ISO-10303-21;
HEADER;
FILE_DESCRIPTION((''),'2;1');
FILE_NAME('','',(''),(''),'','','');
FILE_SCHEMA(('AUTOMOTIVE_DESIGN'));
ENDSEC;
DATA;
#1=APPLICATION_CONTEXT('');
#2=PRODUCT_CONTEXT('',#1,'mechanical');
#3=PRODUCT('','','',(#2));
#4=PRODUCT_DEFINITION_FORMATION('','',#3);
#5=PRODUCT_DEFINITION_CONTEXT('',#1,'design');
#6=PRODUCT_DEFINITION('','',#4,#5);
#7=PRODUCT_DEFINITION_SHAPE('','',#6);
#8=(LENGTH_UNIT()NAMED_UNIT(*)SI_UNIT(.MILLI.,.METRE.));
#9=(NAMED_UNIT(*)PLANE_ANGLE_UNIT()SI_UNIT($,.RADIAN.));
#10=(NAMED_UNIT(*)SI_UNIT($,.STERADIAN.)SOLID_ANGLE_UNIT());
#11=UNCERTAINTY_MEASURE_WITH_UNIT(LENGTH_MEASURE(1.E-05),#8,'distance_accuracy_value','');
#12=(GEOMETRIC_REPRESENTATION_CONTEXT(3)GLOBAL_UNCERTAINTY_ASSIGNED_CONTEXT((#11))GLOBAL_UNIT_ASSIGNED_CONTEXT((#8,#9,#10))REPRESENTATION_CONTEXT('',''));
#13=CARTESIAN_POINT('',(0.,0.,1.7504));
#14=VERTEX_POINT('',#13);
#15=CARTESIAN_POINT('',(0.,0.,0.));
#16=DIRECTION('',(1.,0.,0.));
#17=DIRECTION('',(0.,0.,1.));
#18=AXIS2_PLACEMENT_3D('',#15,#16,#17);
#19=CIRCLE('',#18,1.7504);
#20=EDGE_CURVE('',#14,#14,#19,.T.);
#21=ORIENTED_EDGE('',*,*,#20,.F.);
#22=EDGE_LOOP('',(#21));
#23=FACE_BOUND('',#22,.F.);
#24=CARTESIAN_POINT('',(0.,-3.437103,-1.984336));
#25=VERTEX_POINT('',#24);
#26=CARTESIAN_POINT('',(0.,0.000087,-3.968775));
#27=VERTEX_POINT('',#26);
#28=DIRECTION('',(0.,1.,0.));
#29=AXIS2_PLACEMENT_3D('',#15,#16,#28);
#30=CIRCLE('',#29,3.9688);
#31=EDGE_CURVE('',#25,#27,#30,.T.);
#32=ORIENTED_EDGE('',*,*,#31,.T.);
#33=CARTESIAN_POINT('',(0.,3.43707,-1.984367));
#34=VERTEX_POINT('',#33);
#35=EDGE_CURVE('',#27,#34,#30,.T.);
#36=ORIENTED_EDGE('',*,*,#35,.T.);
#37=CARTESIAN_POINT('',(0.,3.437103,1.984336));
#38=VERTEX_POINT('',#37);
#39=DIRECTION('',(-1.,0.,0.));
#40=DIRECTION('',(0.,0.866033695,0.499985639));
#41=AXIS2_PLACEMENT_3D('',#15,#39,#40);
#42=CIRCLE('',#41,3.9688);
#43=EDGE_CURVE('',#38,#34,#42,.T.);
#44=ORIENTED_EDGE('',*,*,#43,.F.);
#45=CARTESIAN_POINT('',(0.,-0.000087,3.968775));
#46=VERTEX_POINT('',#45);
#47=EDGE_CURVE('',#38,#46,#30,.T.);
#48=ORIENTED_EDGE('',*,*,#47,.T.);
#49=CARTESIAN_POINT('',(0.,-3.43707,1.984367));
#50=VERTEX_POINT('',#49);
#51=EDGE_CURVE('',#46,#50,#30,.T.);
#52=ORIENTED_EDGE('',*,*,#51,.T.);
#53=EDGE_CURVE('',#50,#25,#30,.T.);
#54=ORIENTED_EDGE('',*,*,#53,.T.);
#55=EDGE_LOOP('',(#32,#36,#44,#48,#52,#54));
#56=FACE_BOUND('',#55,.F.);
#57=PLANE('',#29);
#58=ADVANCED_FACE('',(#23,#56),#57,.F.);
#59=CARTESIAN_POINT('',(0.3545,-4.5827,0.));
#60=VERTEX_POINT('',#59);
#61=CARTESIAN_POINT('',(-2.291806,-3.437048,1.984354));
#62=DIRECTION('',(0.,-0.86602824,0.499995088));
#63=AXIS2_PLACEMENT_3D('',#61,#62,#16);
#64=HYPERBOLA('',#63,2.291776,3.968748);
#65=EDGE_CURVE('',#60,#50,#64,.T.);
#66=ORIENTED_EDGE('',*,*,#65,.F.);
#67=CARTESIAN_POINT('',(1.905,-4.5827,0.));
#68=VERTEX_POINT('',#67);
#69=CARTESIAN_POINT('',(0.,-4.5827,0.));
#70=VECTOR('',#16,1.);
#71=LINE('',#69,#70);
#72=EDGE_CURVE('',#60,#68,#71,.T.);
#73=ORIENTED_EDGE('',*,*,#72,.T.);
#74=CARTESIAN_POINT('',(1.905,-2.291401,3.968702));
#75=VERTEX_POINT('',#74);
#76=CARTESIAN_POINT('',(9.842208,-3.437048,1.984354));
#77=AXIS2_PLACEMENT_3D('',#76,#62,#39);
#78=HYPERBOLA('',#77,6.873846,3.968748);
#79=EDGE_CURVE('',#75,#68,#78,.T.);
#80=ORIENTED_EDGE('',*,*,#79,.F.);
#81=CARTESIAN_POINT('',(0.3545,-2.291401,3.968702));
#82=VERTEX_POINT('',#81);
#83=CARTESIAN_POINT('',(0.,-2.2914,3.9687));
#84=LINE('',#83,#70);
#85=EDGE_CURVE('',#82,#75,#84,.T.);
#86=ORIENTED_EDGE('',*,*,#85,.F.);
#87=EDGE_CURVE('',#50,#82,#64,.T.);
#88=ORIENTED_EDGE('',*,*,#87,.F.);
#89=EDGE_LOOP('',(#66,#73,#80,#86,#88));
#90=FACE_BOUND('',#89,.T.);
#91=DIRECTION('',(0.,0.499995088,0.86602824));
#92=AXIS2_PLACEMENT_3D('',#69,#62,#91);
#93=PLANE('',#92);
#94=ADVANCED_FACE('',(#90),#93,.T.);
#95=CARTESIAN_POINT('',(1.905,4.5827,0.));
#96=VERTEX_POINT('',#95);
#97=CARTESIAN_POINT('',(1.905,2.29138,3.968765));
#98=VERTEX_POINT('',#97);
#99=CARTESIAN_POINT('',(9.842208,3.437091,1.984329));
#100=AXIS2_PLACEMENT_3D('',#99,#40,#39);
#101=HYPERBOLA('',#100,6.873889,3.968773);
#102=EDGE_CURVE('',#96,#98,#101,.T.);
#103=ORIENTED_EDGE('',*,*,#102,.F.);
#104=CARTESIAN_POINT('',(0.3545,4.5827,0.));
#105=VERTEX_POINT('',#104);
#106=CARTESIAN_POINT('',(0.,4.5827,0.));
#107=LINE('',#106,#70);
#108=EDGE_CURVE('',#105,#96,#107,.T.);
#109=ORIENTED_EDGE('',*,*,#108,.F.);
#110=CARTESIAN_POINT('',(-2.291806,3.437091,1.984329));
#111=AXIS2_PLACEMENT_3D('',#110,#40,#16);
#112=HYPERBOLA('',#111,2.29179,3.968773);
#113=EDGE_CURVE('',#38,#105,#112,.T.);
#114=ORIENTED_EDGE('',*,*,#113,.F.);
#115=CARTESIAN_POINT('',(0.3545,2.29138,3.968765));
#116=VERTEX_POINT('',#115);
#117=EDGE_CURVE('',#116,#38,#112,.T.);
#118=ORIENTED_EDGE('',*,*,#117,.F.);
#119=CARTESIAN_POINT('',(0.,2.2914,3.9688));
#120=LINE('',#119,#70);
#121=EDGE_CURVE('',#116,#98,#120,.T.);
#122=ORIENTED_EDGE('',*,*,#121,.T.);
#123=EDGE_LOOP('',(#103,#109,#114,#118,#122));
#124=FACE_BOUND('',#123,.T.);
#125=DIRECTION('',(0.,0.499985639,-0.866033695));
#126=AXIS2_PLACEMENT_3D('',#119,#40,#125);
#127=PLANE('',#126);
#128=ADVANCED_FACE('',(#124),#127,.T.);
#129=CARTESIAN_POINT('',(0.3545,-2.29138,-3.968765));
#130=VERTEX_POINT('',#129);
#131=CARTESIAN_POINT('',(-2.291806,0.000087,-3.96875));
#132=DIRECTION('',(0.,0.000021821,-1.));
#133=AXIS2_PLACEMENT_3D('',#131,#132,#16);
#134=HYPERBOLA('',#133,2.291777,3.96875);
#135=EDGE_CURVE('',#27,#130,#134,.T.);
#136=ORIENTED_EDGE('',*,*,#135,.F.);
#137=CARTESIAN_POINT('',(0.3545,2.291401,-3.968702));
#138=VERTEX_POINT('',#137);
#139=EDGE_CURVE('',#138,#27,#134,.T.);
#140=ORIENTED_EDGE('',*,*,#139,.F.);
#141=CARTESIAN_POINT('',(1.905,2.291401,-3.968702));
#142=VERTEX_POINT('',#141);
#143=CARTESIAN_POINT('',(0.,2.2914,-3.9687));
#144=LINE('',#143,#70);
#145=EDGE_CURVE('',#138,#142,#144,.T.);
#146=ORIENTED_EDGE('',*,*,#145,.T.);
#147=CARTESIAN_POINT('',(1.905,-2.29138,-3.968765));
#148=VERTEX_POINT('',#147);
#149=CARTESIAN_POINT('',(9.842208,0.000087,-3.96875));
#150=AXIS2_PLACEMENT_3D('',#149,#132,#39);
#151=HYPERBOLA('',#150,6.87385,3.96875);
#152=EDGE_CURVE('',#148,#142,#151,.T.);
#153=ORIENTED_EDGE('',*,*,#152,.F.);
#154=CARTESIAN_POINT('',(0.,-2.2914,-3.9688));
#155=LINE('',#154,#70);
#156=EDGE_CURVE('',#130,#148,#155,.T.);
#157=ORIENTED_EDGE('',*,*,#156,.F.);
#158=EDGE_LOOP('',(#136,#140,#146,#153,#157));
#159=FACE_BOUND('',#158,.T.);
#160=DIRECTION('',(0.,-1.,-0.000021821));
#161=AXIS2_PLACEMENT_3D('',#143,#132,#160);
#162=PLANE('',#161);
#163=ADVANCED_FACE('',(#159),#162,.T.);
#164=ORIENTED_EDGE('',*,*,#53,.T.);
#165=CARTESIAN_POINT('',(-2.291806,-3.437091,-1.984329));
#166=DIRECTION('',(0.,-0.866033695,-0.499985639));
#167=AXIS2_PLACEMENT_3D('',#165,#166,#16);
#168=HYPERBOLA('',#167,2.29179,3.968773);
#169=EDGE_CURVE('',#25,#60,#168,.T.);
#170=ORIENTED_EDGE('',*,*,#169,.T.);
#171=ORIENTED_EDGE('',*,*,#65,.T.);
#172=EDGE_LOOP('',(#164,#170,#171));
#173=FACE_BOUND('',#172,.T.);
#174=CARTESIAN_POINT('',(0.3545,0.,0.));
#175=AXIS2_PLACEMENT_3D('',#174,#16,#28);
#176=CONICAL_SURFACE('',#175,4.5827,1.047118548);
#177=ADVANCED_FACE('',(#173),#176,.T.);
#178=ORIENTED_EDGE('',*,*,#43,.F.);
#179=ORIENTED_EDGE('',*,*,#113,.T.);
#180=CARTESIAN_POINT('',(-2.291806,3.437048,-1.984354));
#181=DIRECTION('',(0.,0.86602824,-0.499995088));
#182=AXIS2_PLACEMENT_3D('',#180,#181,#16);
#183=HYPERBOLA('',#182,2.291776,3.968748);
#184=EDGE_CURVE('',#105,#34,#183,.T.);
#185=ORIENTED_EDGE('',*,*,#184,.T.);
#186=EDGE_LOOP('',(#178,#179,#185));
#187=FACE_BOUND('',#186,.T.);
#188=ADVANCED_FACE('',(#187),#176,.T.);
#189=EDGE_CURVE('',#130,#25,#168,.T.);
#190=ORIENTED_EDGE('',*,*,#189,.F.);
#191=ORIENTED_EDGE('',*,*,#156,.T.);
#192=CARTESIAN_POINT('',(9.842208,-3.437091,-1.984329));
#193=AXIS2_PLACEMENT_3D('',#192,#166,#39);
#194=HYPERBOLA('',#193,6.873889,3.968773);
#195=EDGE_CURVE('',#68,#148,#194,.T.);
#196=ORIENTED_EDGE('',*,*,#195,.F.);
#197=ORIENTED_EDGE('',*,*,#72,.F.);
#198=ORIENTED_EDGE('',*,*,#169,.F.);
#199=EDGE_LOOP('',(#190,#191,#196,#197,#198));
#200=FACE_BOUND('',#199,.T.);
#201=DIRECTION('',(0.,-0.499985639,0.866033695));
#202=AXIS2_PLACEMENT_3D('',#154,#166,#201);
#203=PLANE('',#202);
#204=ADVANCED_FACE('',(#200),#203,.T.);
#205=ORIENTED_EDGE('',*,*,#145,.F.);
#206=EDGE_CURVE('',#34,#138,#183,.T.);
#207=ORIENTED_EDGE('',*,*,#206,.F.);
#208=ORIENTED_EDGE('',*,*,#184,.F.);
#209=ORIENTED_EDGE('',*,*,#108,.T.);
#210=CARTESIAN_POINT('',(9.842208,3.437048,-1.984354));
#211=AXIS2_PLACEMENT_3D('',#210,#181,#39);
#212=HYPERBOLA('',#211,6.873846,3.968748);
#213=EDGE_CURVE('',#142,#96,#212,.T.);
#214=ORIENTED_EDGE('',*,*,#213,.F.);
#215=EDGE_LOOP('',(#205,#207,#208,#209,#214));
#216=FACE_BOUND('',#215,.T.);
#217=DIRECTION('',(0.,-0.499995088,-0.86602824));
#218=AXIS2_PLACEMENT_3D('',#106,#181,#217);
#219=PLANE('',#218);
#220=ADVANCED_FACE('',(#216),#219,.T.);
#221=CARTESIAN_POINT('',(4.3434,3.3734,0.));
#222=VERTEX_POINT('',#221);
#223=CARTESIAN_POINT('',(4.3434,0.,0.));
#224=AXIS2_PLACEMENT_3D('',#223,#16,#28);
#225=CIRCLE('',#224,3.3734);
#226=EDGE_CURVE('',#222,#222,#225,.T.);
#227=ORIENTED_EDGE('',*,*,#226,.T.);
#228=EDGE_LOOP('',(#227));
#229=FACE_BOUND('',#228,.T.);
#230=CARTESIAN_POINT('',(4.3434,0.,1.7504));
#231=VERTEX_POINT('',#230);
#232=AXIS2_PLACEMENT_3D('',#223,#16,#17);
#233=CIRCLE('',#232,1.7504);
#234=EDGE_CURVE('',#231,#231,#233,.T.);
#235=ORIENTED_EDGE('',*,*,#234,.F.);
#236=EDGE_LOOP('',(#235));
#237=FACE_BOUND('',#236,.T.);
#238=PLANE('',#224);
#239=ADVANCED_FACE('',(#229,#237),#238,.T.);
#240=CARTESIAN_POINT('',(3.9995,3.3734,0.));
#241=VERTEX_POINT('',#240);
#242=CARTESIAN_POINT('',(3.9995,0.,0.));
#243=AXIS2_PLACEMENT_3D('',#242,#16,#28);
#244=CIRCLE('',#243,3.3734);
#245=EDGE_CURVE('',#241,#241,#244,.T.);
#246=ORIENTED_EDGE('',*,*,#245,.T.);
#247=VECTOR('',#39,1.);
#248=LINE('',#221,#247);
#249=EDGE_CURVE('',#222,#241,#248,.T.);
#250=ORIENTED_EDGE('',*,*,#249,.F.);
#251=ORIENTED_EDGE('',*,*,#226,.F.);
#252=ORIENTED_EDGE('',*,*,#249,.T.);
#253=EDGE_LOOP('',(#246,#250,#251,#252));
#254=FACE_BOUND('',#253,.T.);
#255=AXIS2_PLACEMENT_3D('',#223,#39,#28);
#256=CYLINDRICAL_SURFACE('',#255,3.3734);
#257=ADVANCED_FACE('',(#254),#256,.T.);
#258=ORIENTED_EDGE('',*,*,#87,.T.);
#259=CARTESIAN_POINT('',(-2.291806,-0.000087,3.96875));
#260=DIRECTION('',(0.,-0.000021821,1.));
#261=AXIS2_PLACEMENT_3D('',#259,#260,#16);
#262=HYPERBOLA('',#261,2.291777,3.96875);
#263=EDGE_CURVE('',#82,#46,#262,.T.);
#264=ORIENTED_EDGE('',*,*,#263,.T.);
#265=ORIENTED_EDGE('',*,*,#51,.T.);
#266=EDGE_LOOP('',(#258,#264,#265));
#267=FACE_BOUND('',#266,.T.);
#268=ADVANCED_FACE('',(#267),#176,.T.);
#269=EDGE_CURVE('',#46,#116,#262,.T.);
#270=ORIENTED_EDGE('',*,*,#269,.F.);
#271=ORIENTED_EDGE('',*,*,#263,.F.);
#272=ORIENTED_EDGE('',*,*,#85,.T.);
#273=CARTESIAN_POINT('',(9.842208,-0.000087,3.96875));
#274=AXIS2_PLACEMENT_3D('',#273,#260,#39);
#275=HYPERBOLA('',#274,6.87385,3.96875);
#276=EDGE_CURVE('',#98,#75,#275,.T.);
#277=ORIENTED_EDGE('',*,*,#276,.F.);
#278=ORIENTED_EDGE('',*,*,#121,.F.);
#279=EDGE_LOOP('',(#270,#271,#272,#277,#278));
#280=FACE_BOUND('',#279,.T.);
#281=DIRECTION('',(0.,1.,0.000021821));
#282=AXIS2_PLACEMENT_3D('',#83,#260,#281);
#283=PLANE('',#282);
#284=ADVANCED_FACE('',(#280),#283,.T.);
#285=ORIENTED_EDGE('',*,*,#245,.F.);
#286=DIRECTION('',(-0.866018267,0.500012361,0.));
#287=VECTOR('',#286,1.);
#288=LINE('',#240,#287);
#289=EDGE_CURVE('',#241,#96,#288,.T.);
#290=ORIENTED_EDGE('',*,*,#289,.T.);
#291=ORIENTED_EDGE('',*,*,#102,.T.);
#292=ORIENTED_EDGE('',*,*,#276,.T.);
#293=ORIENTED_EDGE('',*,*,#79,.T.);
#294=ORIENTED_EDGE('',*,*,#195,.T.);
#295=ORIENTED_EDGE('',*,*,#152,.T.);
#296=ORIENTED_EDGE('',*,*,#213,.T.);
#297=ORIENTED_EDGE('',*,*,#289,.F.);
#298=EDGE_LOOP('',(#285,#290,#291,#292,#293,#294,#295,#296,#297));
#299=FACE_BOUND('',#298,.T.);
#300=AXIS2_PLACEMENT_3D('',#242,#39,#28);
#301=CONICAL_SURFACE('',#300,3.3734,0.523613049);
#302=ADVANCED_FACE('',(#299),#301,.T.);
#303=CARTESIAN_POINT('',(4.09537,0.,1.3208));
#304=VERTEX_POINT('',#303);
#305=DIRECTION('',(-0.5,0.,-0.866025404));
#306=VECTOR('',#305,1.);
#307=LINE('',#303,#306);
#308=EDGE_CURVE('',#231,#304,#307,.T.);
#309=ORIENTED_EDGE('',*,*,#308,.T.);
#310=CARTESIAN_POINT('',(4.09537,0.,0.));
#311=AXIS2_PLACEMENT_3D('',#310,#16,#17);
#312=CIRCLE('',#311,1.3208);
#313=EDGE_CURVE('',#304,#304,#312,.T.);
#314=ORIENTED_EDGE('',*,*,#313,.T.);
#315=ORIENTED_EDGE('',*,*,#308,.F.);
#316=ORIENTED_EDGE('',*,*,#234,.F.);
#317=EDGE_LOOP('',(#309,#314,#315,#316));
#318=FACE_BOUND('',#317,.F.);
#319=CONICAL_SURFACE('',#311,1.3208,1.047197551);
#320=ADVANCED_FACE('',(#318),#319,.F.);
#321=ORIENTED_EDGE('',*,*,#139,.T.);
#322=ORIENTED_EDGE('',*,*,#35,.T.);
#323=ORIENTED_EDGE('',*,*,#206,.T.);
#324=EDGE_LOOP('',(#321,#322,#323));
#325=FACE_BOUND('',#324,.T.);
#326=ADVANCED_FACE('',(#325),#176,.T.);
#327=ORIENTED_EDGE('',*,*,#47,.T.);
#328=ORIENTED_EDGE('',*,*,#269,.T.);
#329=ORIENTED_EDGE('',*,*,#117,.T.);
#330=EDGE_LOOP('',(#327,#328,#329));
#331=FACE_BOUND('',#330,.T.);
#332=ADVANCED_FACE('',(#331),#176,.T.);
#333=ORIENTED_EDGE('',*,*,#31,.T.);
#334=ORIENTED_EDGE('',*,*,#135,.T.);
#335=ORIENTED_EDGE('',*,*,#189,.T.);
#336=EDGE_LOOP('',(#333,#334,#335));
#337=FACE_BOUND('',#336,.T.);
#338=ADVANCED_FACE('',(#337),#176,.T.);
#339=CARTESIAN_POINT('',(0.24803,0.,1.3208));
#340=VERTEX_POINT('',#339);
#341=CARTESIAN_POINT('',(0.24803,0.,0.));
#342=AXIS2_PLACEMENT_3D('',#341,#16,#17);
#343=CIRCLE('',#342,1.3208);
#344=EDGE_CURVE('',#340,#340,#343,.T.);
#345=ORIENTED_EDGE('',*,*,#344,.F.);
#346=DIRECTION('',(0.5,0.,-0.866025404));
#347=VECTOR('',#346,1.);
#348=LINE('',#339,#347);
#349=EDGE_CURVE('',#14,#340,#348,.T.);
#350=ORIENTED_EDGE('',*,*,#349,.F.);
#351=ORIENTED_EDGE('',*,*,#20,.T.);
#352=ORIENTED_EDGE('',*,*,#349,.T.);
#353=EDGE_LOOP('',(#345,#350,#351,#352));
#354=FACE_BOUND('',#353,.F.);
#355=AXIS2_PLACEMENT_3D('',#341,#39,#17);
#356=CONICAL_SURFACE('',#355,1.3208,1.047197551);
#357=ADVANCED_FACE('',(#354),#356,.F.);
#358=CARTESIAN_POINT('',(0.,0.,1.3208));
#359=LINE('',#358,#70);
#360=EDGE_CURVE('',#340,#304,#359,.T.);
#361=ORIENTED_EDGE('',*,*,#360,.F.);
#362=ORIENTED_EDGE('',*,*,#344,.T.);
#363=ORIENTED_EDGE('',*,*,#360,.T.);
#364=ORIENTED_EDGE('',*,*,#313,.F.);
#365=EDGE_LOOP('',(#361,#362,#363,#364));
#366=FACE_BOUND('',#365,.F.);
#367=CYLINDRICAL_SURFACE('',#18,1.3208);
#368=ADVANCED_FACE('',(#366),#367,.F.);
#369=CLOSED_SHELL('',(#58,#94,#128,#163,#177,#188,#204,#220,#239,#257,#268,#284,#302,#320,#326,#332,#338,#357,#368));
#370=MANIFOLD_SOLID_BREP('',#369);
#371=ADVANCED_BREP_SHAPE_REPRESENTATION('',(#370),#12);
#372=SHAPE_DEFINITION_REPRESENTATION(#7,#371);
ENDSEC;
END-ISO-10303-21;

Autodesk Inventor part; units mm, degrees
ref_plane "YZ Plane" through (0, 0, 0) normal (1, 0, 0) x (0, 1, 0)
ref_plane "XZ Plane" through (0, 0, 0) normal (0, 1, 0) x (-1, 0, 0)
sketch "Sketch1" plane through (0, 0, 0) normal (1, 0, 0) x (0, 1, 0)
  line L0 (-4.5827, 0) -> (-2.2914, 3.9687)
  line L1 (-2.2914, 3.9687) -> (2.2914, 3.9688)
  line L2 (2.2914, 3.9688) -> (4.5827, 0)
  line L3 (4.5827, 0) -> (2.2914, -3.9687)
  line L4 (2.2914, -3.9687) -> (-2.2914, -3.9688)
  line L5 (-2.2914, -3.9688) -> (-4.5827, 0)
  point P0 (0, 0)
  point P1 (0, 0)
  dimension "d0" = 9.1654
extrude "Body" add sketch "Sketch1" along normal blind 4.3434
sketch "Sketch2" plane through (0, 0, 0) normal (-1, 0, 0) x (0, 0, 1)
  line L0 (0, -6.4158) -> (0, 6.4158) projected
  line L1 (-5.5563, 0) -> (5.5563, 0) projected
  point P0 (0, 0)
hole "Thread" at (0, 0, 0) direction (1, 0, 0) diameter 2.6416 end through all thread size "6-32 UNC" class "2B" standard "ANSI Unified Screw Threads"
chamfer "Chamfer1" distance 0.4296 angle 30 1 edges at (0, 0, -1.3208) measured on face at (0, -2.6537, -1.573)
chamfer "Chamfer2" distance 0.4296 angle 30 1 edges at (4.3434, 0, -1.3208) measured on face at (4.3434, -2.6537, -1.573)
sketch "Sketch3" plane through (0, 0, 0) normal (0, 0, 1) x (1, 0, 0)
  line L0 (0, 2.2914) -> (0, 4.5827) projected
  line L1 (0, 4.5827) -> (4.3434, 4.5827) projected
  line L2 (4.3434, 2.2914) -> (4.3434, 4.5827) projected
  line L3 (-0.8687, 0) -> (5.2121, 0) projected
  line L4 (0.3545, 4.5827) -> (0, 3.9688)
  line L5 (4.3434, 3.3734) -> (3.9995, 3.3734)
  line L6 (3.9995, 3.3734) -> (1.905, 4.5827)
  dimension "d3" = 30
  dimension "d5" = 7.9375
  dimension "d6" = 6.7469
  dimension "d8" = 60
  dimension "d9" = 1.905
revolve "Chamfer3" cut sketch "Sketch3" angle 360 about axis through (-10, 0, 0) along (1, 0, 0)
ref_plane "Work Plane1" through (12.8792, 0, 0) normal (0, 0, 1) x (-1, 0, 0)
equation "\"d0\" = 1.1547 * SW"
equation "\"d1\" = KOH"
equation "\"d3\" = ANG1"
equation "\"d5\" = SW0"
equation "\"d6\" = SW1"
equation "\"d8\" = ANG2"
equation "\"d9\" = KOH1"
equation "\"d10\" = -0.5 * GD1 + 0.5 * NND"
equation "\"d39\" = -0.5 * GD1 + 0.5 * NND"
equation "\"d12\" = -0.5 * GD1 + 0.5 * NND"
equation "\"d40\" = -0.5 * GD1 + 0.5 * NND"
equation "\"ANG1\" = 30deg"
equation "\"ANG2\" = 60deg"
equation "\"NND\" = 3.5052"
equation "\"KOH\" = 4.3434"
equation "\"SW\" = 7.9375"
equation "\"SW0\" = SW"
equation "\"SW1\" = 0.85 * SW"
equation "\"KOH1\" = 1.905"
equation "\"THREADDIA\" = 3.5052"
equation "\"TOA\" = 30deg"
equation "\"E0\" = 1.155 * SW"
equation "\"GD1\" = 2.64594"
properties part number "IFI 100/107 - No. 6 - 32 Metal Type" material "Steel, Mild"
